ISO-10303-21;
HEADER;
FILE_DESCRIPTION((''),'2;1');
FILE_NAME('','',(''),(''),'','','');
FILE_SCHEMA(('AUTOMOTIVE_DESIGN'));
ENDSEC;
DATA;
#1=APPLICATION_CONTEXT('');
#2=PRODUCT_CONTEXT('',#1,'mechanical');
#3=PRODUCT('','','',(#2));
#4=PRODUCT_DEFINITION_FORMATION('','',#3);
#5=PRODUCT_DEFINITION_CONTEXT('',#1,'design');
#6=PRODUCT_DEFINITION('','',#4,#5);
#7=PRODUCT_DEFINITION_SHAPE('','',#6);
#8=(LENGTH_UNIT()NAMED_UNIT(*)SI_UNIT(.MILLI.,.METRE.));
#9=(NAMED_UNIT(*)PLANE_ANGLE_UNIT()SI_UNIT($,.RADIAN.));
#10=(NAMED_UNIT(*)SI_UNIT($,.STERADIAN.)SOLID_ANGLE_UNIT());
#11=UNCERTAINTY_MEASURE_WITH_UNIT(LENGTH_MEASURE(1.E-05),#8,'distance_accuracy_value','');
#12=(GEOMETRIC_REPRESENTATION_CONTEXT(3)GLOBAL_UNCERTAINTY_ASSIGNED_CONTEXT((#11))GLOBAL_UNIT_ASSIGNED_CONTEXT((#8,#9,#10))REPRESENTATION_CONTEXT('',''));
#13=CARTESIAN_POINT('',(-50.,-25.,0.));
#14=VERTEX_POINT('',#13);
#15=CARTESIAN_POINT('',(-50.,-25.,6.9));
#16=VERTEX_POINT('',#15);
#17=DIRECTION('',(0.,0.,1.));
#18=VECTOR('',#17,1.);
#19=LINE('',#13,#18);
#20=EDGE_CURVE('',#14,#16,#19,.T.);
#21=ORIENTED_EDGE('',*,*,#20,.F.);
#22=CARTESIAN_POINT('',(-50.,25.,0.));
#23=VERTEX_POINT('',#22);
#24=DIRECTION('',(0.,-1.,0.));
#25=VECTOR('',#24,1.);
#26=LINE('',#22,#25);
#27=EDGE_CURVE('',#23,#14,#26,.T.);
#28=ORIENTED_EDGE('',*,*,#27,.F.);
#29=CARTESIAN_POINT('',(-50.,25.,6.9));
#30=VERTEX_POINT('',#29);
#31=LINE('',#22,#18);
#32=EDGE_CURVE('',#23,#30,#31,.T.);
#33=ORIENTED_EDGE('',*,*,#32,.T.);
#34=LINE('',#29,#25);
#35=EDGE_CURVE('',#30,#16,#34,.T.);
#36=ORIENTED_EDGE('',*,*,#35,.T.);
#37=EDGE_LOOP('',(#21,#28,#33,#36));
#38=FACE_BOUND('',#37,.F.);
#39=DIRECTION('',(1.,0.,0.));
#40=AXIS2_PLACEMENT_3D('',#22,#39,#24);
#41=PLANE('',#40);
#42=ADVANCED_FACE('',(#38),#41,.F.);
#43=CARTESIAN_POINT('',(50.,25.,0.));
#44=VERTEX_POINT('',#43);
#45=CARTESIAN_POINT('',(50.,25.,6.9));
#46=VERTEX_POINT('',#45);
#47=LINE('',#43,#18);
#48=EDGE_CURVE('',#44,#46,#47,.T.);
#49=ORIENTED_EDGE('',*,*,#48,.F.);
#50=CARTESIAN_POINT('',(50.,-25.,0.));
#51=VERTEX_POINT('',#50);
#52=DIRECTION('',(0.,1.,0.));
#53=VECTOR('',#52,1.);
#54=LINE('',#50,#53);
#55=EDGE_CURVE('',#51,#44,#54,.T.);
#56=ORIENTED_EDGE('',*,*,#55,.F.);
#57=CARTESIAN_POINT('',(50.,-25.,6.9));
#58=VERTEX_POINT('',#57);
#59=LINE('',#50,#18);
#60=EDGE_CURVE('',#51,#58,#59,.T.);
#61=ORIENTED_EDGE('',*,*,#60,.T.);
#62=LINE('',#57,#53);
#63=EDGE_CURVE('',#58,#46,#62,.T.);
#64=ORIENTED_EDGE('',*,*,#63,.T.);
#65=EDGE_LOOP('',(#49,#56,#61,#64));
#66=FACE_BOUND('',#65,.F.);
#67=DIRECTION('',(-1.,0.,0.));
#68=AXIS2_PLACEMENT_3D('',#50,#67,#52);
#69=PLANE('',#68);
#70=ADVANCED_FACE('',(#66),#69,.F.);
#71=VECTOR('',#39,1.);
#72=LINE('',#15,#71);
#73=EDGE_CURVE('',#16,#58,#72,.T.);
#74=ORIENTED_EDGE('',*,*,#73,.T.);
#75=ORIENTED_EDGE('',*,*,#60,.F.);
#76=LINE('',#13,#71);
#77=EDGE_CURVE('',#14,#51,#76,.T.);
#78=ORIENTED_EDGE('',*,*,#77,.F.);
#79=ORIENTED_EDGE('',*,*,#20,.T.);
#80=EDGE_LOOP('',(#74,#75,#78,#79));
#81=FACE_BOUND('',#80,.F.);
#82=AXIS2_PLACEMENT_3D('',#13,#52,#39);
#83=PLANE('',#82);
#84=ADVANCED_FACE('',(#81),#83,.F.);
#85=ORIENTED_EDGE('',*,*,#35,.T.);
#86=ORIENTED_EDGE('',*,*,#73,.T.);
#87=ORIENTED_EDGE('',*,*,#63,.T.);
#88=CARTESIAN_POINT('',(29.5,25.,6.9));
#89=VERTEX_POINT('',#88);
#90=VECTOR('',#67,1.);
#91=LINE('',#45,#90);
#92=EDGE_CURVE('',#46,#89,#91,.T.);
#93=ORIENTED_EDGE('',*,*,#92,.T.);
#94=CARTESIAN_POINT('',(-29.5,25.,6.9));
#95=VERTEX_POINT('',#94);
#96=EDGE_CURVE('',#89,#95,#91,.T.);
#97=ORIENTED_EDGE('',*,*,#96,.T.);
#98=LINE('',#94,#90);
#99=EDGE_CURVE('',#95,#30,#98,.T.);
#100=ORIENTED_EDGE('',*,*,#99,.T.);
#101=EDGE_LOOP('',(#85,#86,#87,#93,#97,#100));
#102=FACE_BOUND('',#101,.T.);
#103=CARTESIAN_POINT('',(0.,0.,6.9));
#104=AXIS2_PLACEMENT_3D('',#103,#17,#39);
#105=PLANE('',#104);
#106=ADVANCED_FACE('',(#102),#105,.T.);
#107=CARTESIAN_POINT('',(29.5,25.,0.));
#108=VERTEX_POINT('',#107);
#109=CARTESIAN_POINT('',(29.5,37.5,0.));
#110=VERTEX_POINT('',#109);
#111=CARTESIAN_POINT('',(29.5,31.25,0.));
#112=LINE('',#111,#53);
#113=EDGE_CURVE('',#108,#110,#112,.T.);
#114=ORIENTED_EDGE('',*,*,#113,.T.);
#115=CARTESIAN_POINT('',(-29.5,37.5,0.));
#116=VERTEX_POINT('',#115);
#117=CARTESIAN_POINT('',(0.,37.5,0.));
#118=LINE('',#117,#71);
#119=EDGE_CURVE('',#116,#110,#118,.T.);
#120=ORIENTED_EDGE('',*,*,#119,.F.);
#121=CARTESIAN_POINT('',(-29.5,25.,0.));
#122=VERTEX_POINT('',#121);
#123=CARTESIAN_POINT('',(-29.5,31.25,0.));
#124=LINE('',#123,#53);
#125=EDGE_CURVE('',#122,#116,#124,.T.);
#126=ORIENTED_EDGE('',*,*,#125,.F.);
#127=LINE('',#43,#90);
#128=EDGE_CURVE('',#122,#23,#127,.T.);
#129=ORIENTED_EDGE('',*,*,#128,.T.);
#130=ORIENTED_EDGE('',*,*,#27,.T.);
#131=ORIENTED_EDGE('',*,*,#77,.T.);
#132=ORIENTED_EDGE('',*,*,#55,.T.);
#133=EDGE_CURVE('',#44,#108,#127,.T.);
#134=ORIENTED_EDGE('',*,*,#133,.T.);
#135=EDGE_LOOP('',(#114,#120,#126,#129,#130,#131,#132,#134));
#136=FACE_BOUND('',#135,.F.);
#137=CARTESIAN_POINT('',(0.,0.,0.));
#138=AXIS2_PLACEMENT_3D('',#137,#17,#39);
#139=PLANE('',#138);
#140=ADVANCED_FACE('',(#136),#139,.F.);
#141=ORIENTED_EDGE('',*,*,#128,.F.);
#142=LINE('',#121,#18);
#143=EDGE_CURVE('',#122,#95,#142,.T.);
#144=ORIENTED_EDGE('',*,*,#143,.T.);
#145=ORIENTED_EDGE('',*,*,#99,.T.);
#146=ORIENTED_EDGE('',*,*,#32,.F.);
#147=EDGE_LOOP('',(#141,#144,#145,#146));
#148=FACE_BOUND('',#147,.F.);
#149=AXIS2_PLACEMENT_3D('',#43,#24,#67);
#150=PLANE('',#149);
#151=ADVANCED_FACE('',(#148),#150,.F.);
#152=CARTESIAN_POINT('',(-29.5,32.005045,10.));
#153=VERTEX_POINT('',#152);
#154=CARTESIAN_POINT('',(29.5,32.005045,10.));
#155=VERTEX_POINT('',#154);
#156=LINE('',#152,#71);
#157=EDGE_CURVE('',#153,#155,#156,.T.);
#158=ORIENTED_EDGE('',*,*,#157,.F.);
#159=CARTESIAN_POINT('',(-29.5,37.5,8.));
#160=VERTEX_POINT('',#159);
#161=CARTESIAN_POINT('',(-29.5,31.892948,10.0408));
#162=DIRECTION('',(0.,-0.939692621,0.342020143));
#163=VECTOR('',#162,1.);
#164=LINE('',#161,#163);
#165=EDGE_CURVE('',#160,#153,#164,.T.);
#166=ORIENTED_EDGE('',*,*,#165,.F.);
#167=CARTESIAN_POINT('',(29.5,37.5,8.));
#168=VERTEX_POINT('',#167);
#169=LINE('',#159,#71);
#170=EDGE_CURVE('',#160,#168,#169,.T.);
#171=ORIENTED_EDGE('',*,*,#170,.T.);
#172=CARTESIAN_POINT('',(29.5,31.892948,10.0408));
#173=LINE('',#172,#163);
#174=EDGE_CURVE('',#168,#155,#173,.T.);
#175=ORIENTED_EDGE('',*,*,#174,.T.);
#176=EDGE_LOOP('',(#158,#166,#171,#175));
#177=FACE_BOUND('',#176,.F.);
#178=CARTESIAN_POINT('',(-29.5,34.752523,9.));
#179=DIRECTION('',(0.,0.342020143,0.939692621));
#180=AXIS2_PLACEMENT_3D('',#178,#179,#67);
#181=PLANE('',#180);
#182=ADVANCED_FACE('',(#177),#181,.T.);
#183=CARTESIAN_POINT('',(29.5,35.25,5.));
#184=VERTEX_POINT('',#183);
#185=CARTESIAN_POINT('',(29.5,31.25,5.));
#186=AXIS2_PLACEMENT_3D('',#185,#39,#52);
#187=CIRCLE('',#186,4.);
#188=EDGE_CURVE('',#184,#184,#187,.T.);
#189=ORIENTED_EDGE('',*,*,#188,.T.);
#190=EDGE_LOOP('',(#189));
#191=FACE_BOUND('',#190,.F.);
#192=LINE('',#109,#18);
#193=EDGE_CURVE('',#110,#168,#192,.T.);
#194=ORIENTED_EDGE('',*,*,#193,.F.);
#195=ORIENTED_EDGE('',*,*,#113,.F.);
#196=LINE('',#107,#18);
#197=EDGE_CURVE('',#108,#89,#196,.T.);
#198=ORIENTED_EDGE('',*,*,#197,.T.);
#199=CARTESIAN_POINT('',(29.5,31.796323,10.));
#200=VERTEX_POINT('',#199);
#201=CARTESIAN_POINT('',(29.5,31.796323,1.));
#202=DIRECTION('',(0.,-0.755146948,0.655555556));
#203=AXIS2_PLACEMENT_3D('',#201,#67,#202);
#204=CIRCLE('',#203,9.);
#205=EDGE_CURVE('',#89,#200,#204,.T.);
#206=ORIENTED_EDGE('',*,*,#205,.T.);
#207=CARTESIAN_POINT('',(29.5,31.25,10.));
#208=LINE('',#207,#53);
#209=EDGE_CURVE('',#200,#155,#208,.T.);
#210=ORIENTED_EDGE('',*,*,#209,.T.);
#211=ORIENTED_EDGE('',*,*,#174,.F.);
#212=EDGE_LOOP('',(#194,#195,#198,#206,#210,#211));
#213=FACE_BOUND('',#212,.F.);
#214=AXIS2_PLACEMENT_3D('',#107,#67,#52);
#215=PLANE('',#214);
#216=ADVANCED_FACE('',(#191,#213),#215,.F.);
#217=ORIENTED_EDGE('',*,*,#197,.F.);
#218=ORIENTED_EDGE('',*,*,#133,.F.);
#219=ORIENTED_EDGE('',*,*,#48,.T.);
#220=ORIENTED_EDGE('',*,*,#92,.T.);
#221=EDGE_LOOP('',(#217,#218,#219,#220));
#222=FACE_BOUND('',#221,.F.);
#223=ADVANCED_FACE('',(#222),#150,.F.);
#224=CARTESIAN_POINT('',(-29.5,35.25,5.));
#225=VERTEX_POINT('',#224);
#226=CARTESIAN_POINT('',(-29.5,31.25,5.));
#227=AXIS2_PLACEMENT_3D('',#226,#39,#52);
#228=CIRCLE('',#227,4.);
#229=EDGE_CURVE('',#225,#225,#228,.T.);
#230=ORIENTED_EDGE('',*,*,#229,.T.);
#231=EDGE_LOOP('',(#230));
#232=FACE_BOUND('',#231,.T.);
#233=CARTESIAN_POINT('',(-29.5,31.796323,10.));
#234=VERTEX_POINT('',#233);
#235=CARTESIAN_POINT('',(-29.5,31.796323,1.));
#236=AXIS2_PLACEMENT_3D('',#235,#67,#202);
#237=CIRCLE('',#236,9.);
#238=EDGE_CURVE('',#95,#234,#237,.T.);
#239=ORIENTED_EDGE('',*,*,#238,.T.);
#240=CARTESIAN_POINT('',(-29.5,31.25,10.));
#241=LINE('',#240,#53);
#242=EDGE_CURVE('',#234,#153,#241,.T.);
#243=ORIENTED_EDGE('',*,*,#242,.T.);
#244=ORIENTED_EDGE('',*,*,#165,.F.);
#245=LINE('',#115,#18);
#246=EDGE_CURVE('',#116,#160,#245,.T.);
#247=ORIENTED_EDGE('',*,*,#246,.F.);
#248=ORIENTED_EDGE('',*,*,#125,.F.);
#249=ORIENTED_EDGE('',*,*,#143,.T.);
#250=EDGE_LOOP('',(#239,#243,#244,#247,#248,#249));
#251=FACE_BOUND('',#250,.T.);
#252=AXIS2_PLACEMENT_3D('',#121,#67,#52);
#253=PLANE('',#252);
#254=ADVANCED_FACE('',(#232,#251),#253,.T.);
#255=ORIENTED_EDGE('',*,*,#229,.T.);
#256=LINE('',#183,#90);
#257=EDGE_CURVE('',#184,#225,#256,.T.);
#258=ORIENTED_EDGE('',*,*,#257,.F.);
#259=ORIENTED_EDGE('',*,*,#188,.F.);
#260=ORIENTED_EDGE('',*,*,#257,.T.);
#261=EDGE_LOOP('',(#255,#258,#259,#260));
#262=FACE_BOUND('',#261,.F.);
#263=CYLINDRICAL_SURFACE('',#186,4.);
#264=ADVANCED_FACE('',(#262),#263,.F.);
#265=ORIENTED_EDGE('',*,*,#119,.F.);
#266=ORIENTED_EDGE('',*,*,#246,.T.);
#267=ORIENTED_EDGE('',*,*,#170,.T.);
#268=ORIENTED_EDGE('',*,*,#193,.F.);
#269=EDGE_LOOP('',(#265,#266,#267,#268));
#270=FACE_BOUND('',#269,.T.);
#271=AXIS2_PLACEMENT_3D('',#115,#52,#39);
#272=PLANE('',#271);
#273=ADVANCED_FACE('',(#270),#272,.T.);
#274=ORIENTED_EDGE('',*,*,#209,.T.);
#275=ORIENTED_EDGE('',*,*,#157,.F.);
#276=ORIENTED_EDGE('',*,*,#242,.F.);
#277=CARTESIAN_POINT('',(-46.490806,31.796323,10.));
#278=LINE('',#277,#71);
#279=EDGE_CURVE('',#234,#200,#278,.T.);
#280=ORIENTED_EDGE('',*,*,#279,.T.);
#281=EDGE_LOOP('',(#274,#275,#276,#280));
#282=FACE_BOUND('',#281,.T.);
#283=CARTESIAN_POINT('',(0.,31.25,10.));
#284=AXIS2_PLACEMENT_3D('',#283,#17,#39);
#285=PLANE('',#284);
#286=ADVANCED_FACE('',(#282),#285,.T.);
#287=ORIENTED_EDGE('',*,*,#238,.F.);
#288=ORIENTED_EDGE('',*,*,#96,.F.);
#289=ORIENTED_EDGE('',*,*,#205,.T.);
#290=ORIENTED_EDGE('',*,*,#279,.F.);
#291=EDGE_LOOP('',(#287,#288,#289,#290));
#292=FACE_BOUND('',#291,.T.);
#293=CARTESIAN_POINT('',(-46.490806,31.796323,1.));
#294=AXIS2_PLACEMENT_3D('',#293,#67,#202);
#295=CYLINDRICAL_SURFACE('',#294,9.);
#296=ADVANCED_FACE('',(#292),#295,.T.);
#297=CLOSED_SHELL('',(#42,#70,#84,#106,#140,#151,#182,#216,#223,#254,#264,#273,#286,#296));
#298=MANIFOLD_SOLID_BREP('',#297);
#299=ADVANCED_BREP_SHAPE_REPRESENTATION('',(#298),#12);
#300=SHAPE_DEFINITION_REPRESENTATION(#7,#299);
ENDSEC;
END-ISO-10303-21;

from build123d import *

# Parameters (mm, degrees)
F0_W        = 59
F0_H        = 12.5
F1_DEPTH    = 10
F2_DEPTH    = 6.9
F3_R        = 4
F4_DEPTH    = 59
F5_T1_DEPTH = 92.9816126751
F6_SIZE2    = 5.4949548389
F6_SIZE     = 2


# Not quite as in the source:
# - a fillet or chamfer that OpenCascade refuses, or shapes differently, is made with other operations: its cross-section is extruded or revolved along the edge and cut away or added


with BuildPart() as f1:
    # F0 (on Top) → F1 (new body)
    with BuildSketch(Plane.XY):
        with Locations((0, 31.25)):
            Rectangle(F0_W, F0_H)
    extrude(amount=F1_DEPTH)

    # F0 (on Top) → F2 (join)
    with BuildSketch(Plane.XY):
        Polygon((-50, -25), (50, -25), (50, 25), (29.5, 25), (-29.5, 25), (-50, 25), align=None)
    extrude(amount=F2_DEPTH)

    # F3 (on face) → F4 (cut, through all)
    with BuildSketch(Plane.YZ.offset(29.5)):
        with Locations((31.25, 5)):
            Circle(F3_R)
    extrude(amount=-F4_DEPTH, mode=Mode.SUBTRACT)

    # F5: fillet of radius 9 on 1 edges, made by hand

    # F5_s2 → F5_t1 (cut)
    with BuildSketch(Plane.YZ.offset(-46.4908063375)):
        with BuildLine():
            ThreePointArc((25, 6.9), (28.0613526556, 9.1884064384), (31.796322535, 10))
            Line((31.796322535, 10), (25, 10))
            Line((25, 10), (25, 6.9))
        make_face()
    extrude(amount=F5_T1_DEPTH, mode=Mode.SUBTRACT)

    # F6
    f6_edges = [f1.edges().sort_by_distance(p)[0] for p in [
        (0, 37.5, 10),
    ]]
    f6_side = f1.faces().sort_by_distance((0, 37.5, 5))[0]
    chamfer(f6_edges, length=F6_SIZE, length2=F6_SIZE2, reference=f6_side)


solid = f1.part
